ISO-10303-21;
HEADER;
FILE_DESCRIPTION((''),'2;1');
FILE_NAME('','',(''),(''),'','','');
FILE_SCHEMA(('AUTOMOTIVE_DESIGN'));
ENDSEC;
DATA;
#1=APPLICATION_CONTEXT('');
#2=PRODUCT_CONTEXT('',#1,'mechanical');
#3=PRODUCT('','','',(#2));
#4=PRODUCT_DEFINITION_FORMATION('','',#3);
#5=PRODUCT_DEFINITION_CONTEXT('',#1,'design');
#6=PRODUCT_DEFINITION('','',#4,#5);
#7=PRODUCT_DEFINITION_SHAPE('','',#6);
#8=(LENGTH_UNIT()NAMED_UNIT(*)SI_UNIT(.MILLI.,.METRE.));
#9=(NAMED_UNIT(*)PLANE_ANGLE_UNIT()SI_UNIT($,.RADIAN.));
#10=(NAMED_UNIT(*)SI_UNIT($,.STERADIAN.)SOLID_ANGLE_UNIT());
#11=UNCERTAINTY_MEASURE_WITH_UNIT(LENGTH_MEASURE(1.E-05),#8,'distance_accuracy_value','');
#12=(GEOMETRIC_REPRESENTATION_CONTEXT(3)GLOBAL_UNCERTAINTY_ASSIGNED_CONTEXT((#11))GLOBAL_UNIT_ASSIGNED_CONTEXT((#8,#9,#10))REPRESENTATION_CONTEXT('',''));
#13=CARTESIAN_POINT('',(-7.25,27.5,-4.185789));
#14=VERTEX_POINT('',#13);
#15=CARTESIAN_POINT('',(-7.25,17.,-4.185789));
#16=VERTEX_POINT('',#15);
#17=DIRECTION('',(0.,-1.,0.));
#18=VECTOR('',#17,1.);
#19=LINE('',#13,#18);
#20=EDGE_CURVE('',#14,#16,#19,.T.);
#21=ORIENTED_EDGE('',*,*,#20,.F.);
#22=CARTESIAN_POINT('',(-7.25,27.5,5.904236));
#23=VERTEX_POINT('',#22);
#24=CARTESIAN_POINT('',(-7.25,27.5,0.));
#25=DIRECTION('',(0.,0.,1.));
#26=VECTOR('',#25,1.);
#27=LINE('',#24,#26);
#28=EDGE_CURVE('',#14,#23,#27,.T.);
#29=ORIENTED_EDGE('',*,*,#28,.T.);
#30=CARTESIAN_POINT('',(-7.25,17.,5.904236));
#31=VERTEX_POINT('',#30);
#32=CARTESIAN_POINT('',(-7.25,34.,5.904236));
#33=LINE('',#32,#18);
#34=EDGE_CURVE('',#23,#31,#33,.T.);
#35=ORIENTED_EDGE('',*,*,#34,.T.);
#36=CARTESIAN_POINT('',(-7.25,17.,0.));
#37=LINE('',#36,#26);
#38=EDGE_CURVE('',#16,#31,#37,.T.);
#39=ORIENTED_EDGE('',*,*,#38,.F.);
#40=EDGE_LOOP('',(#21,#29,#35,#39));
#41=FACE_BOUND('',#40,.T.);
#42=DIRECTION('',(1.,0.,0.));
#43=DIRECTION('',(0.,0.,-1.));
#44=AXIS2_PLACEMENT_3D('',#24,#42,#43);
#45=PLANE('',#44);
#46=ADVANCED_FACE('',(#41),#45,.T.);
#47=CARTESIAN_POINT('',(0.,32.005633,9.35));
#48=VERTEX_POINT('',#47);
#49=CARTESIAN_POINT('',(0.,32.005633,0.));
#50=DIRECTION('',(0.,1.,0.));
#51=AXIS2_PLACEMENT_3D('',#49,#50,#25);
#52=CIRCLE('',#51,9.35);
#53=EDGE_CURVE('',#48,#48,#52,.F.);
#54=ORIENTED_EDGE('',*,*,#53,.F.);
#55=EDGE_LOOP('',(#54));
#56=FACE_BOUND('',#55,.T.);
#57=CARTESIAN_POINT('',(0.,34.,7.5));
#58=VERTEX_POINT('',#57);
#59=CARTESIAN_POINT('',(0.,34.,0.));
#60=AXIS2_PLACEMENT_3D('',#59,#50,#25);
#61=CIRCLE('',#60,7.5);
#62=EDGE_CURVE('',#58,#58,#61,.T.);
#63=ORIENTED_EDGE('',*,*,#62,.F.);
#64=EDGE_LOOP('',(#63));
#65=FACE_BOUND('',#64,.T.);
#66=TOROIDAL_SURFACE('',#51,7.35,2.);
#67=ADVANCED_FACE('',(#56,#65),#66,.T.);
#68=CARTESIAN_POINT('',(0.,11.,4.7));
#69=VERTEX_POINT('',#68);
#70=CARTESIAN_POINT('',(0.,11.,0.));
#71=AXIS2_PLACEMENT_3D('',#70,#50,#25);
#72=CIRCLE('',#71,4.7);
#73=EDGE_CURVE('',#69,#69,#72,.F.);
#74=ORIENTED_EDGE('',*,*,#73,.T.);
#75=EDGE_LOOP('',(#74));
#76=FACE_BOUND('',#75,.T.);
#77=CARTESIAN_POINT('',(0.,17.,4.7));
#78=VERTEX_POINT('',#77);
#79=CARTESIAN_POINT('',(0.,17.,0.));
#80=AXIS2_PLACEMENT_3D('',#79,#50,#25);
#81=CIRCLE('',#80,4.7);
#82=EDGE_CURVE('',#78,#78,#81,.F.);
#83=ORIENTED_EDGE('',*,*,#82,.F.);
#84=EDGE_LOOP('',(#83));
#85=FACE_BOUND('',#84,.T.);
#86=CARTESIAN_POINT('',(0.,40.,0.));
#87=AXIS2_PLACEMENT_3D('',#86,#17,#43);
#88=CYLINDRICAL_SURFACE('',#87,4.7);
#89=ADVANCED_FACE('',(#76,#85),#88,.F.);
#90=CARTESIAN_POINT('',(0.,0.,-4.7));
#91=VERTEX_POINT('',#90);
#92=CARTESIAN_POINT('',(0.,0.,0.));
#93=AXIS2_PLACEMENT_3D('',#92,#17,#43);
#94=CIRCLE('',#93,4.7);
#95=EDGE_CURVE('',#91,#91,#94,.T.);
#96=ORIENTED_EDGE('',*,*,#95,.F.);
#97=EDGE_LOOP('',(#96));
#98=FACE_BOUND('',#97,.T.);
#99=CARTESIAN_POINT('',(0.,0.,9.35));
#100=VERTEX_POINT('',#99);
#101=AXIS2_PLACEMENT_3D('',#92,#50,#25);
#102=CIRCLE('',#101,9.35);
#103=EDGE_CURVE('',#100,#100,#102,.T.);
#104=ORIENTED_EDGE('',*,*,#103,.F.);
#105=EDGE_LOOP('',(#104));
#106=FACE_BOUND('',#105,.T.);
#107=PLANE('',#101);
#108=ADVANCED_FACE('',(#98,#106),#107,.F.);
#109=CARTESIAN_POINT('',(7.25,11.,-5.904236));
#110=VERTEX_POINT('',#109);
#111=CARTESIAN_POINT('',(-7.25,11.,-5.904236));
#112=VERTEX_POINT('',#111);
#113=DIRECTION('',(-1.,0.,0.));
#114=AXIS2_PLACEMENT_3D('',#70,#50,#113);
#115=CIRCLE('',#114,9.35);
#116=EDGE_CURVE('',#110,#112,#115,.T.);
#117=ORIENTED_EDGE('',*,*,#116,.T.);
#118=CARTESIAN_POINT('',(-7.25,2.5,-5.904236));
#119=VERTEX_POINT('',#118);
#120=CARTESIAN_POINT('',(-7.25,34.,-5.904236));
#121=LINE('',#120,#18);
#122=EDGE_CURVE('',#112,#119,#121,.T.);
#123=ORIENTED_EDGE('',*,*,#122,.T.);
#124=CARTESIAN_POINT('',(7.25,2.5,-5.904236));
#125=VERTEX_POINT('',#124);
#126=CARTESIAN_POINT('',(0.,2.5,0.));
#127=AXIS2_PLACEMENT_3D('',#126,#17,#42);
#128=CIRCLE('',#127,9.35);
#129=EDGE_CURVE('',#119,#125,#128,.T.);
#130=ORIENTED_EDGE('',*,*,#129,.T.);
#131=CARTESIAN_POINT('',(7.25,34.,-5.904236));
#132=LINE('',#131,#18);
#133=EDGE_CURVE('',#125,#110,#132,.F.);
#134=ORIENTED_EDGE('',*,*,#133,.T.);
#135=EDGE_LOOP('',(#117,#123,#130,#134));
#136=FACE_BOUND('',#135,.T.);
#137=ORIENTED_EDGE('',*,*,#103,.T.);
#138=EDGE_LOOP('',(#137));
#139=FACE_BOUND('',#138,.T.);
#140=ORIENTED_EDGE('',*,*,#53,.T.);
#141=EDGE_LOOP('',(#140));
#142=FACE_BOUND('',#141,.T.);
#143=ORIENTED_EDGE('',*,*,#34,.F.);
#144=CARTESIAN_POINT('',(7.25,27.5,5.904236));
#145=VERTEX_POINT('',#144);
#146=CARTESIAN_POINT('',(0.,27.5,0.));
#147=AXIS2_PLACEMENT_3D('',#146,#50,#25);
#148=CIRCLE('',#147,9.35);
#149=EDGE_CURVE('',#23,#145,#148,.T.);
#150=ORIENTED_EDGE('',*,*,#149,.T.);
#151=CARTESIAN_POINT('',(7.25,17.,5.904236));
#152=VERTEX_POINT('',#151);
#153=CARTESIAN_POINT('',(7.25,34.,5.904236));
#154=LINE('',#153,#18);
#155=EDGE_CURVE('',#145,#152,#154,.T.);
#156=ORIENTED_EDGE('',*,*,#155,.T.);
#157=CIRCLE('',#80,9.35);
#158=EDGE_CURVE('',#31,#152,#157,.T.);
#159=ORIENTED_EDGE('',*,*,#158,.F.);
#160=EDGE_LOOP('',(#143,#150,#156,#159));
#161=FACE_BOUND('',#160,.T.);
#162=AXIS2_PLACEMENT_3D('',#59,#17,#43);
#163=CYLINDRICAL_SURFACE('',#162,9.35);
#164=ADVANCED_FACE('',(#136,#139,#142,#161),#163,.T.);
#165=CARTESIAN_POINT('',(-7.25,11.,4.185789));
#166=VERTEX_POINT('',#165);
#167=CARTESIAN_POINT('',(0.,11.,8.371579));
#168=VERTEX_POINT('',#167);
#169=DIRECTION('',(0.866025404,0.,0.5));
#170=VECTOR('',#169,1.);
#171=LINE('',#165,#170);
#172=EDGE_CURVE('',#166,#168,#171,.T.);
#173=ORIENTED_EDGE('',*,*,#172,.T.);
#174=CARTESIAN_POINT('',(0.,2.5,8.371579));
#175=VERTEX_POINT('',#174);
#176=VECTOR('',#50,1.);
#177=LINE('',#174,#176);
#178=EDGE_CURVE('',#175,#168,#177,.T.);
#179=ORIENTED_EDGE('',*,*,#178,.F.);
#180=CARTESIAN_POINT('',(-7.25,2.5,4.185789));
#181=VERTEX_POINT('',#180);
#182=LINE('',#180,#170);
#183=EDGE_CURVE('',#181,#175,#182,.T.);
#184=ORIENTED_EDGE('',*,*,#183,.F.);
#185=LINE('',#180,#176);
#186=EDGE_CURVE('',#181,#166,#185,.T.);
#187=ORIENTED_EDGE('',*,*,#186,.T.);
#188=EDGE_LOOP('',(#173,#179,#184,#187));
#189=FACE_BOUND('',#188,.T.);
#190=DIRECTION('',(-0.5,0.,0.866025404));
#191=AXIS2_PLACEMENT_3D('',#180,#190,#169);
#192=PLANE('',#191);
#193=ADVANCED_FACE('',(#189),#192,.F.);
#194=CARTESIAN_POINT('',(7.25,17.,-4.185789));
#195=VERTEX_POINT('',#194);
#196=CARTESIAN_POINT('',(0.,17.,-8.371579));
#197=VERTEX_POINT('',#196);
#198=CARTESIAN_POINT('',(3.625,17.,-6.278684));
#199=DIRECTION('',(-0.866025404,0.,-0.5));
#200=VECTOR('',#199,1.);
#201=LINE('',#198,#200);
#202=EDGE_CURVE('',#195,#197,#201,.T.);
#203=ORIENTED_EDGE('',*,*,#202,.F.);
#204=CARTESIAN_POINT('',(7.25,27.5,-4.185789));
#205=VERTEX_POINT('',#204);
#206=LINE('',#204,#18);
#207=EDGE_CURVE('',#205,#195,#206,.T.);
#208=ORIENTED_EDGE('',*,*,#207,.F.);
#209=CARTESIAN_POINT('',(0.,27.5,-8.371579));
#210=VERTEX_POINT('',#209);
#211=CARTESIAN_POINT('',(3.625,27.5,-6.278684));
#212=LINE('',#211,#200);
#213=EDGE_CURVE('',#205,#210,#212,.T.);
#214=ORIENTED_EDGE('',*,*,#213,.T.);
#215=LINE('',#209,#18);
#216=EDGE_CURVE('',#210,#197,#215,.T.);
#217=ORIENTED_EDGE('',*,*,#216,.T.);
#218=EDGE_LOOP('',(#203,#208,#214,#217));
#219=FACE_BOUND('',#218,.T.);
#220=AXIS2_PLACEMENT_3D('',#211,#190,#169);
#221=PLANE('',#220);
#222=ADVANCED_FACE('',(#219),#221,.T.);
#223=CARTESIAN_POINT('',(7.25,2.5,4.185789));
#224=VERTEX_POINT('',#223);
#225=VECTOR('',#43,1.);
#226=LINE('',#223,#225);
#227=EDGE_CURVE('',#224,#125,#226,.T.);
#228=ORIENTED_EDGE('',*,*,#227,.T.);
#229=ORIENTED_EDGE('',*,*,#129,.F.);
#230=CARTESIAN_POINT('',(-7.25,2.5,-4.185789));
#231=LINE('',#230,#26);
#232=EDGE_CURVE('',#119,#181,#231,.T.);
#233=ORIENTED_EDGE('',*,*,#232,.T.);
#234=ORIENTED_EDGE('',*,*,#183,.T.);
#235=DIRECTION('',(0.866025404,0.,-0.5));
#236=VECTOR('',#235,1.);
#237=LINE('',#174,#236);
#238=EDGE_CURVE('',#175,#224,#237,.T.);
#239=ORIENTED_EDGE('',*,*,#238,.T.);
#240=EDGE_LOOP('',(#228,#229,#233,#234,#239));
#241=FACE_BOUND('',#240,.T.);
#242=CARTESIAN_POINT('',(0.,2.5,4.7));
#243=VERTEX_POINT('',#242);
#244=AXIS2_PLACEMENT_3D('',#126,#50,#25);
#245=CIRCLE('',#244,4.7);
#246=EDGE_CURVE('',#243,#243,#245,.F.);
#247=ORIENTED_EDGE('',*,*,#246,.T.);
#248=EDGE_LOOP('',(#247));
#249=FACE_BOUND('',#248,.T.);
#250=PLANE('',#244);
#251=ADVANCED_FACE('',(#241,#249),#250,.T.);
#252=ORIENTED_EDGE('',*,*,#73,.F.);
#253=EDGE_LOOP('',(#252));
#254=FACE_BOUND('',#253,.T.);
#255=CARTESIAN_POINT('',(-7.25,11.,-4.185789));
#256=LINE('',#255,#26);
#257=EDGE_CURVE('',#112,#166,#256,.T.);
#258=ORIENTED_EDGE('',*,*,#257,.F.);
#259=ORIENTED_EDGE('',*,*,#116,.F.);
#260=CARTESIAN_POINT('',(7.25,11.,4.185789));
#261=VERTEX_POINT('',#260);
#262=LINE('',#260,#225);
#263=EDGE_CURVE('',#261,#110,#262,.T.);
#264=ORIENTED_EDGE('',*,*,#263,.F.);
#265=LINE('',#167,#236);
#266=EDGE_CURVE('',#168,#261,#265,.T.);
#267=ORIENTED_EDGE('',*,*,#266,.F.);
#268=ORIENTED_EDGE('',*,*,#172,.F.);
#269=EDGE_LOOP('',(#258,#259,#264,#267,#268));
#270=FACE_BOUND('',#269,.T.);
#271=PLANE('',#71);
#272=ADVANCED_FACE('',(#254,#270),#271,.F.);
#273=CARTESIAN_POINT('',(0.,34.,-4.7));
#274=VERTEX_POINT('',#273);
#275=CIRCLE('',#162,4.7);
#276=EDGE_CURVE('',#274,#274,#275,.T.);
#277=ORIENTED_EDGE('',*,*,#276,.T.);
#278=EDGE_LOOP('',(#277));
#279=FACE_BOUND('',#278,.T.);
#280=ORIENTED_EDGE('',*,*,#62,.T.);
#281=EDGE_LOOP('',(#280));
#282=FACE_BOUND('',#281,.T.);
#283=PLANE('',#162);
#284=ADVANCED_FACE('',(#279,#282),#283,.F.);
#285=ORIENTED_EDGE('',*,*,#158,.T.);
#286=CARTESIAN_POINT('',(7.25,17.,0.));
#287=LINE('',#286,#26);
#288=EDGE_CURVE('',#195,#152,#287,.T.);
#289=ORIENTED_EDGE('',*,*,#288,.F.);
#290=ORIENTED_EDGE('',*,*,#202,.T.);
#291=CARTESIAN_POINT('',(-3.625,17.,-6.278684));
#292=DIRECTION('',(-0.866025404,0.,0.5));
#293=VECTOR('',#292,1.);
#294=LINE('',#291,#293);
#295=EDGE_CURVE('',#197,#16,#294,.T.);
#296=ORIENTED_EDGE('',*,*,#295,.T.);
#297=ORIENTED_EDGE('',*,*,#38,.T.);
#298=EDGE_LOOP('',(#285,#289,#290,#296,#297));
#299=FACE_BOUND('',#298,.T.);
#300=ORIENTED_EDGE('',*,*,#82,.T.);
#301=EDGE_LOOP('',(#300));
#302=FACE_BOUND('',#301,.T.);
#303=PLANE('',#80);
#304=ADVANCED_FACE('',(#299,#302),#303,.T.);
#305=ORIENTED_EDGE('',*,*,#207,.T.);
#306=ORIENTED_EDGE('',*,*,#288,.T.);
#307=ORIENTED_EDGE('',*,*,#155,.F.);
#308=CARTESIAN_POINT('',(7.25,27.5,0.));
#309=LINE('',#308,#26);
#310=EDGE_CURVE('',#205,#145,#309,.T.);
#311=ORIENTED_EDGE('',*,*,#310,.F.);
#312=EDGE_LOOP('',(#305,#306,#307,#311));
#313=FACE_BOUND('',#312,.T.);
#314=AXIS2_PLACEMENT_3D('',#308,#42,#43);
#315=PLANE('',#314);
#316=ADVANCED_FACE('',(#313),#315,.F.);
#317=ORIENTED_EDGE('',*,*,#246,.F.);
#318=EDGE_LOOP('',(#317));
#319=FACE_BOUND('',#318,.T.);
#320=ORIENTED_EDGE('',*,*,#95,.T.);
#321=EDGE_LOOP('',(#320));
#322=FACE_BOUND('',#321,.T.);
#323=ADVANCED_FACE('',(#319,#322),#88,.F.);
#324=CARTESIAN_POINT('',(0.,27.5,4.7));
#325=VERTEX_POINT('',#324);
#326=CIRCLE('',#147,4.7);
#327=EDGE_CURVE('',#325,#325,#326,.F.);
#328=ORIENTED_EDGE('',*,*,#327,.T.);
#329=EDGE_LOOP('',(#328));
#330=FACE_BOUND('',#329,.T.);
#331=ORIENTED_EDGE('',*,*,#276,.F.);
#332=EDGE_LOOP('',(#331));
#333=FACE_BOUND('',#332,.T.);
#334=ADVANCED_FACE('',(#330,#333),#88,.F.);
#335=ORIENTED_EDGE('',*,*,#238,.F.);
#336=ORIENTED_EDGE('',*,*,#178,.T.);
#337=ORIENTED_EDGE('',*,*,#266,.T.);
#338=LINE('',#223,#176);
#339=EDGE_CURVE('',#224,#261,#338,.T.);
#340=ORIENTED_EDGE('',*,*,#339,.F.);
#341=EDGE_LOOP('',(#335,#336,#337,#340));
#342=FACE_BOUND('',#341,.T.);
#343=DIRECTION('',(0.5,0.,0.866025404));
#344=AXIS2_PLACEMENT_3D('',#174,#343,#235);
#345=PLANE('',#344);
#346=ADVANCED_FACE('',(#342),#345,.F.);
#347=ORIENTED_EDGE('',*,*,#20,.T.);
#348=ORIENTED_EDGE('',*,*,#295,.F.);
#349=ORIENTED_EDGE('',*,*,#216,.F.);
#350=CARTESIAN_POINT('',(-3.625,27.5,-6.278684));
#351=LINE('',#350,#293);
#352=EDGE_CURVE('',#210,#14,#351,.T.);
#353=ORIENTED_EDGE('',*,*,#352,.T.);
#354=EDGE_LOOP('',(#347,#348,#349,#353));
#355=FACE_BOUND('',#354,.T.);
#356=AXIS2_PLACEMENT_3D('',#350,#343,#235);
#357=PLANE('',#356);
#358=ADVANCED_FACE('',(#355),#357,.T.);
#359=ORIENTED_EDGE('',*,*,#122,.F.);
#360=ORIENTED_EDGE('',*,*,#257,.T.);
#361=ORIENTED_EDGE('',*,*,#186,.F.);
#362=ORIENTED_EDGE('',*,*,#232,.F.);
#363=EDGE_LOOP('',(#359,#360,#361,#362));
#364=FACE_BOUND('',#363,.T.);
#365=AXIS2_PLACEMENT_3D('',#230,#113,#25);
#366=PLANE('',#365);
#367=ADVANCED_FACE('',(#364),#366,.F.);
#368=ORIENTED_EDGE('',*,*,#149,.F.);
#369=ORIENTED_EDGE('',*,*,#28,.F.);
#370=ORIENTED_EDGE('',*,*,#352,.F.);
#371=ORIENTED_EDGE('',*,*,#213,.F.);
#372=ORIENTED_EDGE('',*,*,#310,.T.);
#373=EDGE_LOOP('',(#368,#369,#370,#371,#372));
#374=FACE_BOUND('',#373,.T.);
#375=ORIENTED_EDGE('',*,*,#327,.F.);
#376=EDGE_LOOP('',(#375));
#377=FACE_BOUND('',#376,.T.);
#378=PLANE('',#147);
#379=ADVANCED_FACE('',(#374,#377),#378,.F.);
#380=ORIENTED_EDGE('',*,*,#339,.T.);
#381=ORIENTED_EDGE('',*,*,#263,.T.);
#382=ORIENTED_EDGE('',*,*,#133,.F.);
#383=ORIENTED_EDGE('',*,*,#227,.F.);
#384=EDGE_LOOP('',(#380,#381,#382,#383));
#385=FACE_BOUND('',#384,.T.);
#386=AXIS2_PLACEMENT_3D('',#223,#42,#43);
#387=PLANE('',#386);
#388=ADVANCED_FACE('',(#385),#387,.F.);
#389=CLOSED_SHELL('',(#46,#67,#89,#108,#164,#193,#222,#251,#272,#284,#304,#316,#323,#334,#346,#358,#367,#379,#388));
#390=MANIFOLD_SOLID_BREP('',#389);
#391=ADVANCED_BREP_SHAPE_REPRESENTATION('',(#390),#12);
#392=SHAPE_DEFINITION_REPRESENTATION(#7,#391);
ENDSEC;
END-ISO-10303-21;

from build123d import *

# Parameters (mm, degrees)
SKETCH1_R           = 9.35
SKETCH1_R_2         = 7.5
BOSS_EXTRUDE1_DEPTH = 34
FILLET1_R           = 2
SKETCH2_R           = 7.5
BOSS_EXTRUDE2_DEPTH = 34
SKETCH3_R           = 4.7
CUT_EXTRUDE1_DEPTH  = 40
CUT_EXTRUDE2_DEPTH  = 8.5
SKETCH5_W           = 14.5
SKETCH5_H           = 8.5
CUT_EXTRUDE3_DEPTH  = 10
CUT_EXTRUDE10_DEPTH = 10.5


with BuildPart() as part:
    # Sketch1 → Boss-Extrude1 (new body)
    with BuildSketch(Plane(origin=(0, 0, 0), x_dir=(1, 0, 0), z_dir=(0, 1, 0))):
        with Locations(Location((0, 0, 0), (0, 0, 270))):
            Circle(SKETCH1_R)
        with Locations(Location((0, 0, 0), (0, 0, 270))):
            Circle(SKETCH1_R_2, mode=Mode.SUBTRACT)
    extrude(amount=BOSS_EXTRUDE1_DEPTH)

    # Fillet1
    # the kernel refuses this fillet: 2 mm, written as the material it takes off along each edge
    with BuildSketch(Plane(origin=(0, 34, 0), x_dir=(0, 0, 1), z_dir=(-1, 0, 0))) as fillet1_piece_1:
        with BuildLine():
            CenterArc((7.35, -1.994367068), FILLET1_R, 0, 85.698777695)
            Line((7.5, 0), (7.503, 0.039887341))
            ThreePointArc((7.503, 0.039887341), (8.425, 0.04), (9.35, 0.04))
            Line((9.35, 0.04), (9.39, 0))
            Line((9.39, 0), (9.39, -1.994367068))
            Line((9.39, -1.994367068), (9.35, -1.994367068))
        make_face()
    revolve(axis=Axis((0, 34, 0), (0, 1, 0)), mode=Mode.SUBTRACT)

    # Sketch2 → Boss-Extrude2 (add)
    with BuildSketch(Plane(origin=(0, 0, 0), x_dir=(-1, 0, 0), z_dir=(0, -1, 0))):
        Circle(SKETCH2_R)
    extrude(amount=-BOSS_EXTRUDE2_DEPTH)

    # Sketch3 → Cut-Extrude1 (cut)
    with BuildSketch(Plane(origin=(0, 0, 0), x_dir=(-1, 0, 0), z_dir=(0, -1, 0))):
        with Locations(Location((0, 0, 0), (0, 0, 90))):
            Circle(SKETCH3_R)
    extrude(amount=-CUT_EXTRUDE1_DEPTH, mode=Mode.SUBTRACT)

    # Sketch4 → Cut-Extrude2 (cut)
    with BuildSketch(Plane(origin=(0, 11, 0), x_dir=(1, 0, 0), z_dir=(0, 1, 0))):
        Polygon((0, -8.371578903), (7.25, -4.185789452), (7.25, 4.185789452), (0, 8.371578903), (-7.25, 4.185789452), (-7.25, -4.185789452), align=None)
    extrude(amount=-CUT_EXTRUDE2_DEPTH, mode=Mode.SUBTRACT)

    # Sketch5 → Cut-Extrude3 (cut)
    with BuildSketch(Plane.XY):
        with Locations((0, 6.75)):
            Rectangle(SKETCH5_W, SKETCH5_H)
    extrude(amount=-CUT_EXTRUDE3_DEPTH, mode=Mode.SUBTRACT)

    # Sketch6 → Cut-Extrude10 (cut)
    with BuildSketch(Plane(origin=(0, 17, 0), x_dir=(1, 0, 0), z_dir=(0, 1, 0))):
        Polygon((-7.25, 4.185789452), (-7.25, -4.185789452), (-7.25, -13.840874754), (7.25, -13.840874754), (7.25, -4.185789452), (7.25, 4.185789452), align=None)
        Polygon((7.25, 4.185789452), (-7.25, 4.185789452), (0, 8.371578903), align=None)
    extrude(amount=CUT_EXTRUDE10_DEPTH, mode=Mode.SUBTRACT)


solid = part.part
